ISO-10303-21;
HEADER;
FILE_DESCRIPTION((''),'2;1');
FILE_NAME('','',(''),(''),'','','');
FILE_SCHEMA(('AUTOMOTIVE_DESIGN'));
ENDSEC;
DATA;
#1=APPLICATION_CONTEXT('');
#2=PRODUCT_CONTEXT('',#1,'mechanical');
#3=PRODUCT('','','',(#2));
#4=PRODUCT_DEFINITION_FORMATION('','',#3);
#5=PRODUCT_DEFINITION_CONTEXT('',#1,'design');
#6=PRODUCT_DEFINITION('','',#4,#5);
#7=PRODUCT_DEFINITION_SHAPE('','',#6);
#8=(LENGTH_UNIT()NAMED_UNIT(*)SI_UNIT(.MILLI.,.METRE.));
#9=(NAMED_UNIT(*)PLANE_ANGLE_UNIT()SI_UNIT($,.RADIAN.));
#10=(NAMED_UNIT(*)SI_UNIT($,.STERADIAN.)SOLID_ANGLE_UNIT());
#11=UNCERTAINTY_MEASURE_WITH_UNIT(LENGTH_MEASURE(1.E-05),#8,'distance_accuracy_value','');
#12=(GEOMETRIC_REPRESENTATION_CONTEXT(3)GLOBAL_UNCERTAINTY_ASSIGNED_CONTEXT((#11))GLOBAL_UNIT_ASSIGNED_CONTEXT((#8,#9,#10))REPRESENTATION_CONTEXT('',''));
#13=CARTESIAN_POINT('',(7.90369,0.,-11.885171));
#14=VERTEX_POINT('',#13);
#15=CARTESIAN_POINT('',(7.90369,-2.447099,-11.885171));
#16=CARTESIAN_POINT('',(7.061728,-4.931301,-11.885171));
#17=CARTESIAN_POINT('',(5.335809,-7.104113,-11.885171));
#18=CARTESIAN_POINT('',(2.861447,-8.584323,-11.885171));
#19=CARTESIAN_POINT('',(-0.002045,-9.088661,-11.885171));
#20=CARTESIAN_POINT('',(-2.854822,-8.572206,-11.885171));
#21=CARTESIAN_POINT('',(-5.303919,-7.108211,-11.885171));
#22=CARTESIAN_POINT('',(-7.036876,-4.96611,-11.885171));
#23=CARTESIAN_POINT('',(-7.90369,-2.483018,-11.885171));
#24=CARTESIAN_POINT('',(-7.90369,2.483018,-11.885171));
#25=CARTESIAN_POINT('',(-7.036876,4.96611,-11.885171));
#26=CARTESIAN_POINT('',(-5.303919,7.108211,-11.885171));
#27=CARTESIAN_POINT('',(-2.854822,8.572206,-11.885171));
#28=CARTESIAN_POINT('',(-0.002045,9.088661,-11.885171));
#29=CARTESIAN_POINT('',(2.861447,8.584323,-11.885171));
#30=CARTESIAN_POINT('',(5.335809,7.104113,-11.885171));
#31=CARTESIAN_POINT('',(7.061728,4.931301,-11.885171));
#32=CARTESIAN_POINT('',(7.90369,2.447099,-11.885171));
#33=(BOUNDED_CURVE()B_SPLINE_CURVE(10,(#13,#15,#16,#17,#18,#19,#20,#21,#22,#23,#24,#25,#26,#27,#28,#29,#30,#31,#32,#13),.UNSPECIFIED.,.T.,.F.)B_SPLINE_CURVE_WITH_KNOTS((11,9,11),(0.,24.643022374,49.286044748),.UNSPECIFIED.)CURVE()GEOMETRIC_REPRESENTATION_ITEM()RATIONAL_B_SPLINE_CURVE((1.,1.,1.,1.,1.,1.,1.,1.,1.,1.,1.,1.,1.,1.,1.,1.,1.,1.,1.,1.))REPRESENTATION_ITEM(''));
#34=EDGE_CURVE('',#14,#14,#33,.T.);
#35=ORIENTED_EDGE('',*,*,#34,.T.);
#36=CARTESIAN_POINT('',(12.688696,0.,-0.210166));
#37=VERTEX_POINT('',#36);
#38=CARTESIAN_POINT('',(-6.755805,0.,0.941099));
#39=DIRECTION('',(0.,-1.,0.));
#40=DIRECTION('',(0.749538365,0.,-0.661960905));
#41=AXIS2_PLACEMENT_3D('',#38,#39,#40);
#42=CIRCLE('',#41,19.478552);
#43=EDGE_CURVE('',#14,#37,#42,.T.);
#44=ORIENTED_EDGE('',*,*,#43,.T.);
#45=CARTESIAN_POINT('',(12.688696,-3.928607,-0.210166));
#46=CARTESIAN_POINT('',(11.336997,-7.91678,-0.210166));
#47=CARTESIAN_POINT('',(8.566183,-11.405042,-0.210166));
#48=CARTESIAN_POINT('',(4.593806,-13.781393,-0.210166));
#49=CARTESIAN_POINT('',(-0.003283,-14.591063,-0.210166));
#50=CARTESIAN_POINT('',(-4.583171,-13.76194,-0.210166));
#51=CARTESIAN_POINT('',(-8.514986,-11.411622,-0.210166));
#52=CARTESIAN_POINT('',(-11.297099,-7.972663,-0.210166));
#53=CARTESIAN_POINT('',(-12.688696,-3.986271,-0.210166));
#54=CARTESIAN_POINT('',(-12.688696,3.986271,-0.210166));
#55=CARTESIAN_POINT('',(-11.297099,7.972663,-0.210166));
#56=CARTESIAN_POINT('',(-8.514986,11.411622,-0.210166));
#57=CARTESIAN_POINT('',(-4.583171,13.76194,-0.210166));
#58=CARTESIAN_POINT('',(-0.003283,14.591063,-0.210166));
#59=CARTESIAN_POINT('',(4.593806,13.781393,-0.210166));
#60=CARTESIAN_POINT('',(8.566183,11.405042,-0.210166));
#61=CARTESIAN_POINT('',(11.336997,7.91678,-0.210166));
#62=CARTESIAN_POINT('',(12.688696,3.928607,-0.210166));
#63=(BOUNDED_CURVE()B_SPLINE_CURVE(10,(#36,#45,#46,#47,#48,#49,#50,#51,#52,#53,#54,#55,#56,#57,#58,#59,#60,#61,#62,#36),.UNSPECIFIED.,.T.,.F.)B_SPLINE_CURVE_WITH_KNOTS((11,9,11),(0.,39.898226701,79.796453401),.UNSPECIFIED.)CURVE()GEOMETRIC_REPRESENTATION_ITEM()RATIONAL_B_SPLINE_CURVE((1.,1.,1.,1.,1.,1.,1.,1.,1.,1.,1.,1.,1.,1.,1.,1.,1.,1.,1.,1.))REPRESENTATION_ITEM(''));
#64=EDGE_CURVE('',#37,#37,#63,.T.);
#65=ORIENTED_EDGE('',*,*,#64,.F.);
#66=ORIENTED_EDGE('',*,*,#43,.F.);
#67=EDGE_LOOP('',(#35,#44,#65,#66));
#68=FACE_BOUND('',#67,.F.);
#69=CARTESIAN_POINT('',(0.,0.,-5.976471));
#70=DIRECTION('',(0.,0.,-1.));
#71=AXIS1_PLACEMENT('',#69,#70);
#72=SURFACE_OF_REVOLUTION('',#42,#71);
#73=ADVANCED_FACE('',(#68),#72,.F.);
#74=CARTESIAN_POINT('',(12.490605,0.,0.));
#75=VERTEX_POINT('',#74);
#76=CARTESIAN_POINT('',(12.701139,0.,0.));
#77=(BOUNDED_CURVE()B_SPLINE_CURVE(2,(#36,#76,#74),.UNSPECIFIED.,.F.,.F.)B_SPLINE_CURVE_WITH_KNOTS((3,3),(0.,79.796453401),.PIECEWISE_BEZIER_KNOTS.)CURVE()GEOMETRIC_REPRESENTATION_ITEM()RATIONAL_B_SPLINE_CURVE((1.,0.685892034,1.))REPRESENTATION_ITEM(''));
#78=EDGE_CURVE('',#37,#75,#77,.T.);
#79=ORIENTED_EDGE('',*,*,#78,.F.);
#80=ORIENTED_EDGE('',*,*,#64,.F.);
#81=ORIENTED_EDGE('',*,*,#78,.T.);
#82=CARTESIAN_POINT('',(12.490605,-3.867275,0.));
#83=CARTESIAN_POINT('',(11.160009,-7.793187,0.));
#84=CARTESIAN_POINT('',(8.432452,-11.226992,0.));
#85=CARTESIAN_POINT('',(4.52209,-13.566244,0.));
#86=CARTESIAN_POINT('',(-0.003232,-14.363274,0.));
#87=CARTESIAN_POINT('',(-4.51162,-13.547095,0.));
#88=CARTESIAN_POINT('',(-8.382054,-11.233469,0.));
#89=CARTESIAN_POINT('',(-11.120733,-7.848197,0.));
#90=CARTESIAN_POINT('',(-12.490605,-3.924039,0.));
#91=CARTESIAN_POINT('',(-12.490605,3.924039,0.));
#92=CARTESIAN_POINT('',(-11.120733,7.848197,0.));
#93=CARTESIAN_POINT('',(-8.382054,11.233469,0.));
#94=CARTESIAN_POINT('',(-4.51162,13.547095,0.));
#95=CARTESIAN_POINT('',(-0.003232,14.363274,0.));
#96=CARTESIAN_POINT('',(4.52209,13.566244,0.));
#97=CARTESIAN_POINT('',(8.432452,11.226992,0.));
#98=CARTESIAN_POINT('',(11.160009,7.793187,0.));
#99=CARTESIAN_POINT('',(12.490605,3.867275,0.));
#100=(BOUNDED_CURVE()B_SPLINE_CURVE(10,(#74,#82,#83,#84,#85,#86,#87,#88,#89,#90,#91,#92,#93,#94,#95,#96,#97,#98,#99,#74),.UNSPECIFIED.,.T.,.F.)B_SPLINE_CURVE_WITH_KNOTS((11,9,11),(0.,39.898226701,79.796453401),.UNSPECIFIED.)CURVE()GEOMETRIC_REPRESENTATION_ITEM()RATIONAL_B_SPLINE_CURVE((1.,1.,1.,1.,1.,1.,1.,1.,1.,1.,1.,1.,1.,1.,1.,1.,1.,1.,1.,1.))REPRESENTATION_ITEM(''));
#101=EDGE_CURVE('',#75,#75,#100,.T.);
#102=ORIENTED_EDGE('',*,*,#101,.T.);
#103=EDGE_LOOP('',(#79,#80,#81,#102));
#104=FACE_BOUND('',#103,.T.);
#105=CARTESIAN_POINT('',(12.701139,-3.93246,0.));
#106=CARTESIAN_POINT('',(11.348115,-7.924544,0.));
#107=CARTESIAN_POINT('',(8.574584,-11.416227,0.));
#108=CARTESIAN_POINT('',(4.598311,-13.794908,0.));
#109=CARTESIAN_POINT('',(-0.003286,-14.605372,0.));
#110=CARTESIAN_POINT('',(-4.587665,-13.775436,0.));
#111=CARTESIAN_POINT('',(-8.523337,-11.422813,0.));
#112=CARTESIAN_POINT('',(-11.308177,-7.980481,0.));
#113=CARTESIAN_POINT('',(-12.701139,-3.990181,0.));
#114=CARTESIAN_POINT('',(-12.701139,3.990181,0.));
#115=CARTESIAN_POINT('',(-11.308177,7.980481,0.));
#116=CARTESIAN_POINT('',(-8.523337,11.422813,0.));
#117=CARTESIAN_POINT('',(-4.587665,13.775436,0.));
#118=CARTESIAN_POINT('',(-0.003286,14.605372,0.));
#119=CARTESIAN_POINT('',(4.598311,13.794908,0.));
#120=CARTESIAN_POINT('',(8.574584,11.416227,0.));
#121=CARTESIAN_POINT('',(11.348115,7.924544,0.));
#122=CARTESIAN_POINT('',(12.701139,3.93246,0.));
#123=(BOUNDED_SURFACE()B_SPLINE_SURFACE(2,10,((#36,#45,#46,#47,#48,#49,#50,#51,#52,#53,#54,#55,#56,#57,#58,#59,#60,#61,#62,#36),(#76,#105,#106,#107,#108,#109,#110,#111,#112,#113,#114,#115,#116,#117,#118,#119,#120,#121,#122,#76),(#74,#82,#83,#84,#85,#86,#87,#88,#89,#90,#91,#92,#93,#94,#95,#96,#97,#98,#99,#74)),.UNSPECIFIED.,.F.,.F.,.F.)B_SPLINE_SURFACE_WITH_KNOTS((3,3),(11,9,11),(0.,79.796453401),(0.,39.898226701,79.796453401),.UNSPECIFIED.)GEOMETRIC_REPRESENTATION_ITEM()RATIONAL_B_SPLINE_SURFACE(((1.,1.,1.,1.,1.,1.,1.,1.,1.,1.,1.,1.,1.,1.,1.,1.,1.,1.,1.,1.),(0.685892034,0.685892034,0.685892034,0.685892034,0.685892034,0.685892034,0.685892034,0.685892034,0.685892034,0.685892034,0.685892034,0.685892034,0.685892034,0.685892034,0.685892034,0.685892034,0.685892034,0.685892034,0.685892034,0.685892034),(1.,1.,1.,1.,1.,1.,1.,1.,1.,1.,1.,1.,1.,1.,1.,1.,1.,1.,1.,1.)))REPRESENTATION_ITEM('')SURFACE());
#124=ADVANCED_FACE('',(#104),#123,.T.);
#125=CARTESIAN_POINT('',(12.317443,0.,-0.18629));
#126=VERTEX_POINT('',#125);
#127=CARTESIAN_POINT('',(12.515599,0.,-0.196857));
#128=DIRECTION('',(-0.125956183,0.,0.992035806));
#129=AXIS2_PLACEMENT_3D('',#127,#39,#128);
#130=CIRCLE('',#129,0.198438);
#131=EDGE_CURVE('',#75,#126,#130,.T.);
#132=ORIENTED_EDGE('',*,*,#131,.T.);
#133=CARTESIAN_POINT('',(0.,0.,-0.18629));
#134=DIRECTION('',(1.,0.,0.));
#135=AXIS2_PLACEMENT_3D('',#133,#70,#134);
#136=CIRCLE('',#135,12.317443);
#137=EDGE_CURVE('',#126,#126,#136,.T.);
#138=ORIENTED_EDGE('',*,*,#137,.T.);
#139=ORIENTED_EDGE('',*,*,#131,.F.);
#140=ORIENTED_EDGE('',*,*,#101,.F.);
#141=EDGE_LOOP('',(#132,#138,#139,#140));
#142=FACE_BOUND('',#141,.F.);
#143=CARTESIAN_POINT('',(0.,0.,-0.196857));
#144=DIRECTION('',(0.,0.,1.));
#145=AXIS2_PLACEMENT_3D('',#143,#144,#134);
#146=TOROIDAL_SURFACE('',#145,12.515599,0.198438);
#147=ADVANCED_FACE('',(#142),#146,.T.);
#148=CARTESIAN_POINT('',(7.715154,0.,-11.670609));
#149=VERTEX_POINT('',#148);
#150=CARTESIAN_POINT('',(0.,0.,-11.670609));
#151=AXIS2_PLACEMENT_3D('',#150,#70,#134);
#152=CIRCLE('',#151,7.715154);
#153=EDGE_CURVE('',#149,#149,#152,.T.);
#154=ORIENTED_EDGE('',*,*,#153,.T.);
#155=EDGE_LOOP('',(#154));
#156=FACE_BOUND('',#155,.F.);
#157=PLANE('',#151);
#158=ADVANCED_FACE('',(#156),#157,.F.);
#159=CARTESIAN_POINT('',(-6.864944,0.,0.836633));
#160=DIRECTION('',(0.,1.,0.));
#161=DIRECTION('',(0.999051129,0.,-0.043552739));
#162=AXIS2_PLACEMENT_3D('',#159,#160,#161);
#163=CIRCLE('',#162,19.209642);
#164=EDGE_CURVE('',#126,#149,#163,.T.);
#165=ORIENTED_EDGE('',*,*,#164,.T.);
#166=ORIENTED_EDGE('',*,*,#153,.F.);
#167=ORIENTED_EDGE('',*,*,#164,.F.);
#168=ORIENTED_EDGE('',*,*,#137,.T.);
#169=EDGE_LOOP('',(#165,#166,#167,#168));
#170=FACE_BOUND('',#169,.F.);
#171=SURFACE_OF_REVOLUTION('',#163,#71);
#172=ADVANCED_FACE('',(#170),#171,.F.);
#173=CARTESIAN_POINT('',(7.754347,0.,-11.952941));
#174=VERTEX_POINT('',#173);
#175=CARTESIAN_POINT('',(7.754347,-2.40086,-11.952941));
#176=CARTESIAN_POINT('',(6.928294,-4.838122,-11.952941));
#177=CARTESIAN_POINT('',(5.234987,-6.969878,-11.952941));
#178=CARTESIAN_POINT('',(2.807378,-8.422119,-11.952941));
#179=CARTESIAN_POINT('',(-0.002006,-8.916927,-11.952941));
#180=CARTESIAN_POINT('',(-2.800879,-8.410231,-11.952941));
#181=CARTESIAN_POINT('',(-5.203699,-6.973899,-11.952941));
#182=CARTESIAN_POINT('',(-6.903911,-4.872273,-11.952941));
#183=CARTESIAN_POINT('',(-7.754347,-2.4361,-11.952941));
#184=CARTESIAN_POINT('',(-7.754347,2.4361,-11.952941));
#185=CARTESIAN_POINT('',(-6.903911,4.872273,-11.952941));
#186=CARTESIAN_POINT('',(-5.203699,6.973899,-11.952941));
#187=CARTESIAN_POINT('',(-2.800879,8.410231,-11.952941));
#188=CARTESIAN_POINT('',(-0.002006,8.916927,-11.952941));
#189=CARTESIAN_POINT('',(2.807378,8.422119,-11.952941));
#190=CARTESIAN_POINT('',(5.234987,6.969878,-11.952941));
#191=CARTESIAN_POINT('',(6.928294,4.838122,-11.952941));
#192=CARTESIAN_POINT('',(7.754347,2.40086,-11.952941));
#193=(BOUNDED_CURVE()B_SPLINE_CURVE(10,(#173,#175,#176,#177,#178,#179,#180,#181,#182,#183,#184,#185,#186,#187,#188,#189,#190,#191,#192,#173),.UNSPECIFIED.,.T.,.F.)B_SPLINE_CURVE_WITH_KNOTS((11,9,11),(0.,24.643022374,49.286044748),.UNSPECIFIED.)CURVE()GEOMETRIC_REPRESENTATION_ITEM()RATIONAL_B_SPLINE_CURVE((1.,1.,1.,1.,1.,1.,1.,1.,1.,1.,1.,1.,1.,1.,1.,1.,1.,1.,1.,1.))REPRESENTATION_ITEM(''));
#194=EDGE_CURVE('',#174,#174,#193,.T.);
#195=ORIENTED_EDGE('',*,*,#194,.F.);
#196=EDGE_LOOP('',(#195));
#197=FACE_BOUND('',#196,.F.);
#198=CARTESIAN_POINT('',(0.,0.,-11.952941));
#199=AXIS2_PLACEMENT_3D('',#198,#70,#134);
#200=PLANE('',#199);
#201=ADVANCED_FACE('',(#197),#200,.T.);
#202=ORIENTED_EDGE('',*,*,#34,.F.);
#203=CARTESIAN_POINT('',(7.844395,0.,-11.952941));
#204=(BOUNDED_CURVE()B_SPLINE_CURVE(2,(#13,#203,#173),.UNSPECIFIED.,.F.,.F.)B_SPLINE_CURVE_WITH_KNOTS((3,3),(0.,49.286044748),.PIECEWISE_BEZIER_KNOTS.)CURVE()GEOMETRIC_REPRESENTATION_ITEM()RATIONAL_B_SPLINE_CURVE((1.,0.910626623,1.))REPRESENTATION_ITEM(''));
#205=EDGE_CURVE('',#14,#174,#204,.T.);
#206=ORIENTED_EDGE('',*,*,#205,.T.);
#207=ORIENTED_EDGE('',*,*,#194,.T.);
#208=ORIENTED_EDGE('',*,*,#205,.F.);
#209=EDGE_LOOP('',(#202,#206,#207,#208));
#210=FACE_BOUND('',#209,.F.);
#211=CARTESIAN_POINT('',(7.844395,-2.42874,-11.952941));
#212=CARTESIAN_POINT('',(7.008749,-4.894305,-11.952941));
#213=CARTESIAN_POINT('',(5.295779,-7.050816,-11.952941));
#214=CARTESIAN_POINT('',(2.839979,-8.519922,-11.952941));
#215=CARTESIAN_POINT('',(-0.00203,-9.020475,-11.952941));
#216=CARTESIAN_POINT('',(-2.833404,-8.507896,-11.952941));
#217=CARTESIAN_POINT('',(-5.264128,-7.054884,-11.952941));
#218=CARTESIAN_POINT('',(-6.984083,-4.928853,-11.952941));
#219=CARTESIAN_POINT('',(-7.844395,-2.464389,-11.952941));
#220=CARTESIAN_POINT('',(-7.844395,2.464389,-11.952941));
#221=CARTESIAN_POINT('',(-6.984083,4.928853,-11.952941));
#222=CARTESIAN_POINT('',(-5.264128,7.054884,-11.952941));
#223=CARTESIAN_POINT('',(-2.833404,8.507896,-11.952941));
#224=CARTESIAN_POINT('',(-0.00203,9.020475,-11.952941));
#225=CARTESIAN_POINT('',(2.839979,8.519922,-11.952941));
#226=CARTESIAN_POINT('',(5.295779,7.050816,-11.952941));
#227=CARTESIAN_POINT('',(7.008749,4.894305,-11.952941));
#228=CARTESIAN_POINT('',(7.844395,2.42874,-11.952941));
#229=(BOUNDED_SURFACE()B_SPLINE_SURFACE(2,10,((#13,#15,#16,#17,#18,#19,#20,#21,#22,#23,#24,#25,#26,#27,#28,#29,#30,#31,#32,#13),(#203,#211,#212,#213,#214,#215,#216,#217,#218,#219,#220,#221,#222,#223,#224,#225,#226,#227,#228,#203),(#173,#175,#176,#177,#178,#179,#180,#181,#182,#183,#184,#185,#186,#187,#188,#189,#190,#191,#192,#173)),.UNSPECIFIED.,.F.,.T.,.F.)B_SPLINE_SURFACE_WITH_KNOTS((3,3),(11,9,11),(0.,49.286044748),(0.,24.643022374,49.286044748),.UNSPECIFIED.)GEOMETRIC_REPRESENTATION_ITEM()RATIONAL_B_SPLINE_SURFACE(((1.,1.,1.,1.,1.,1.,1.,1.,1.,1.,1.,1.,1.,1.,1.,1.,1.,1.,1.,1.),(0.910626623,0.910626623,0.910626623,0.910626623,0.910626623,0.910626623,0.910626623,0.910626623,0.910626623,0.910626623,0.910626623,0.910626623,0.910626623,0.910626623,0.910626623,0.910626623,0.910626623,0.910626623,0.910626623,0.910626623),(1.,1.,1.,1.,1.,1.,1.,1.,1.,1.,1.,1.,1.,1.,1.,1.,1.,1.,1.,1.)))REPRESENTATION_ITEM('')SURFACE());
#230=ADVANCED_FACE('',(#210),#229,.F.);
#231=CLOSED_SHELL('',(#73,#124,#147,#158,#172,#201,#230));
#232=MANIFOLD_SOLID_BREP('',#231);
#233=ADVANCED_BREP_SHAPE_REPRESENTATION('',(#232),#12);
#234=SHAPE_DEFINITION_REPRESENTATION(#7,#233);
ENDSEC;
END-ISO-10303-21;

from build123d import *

# Parameters (mm, degrees)
F2_R = 0.1984375
F4_R = 0.1984375


# Not quite as in the source:
# - a fillet or chamfer that OpenCascade refuses, or shapes differently, is made with other operations: its cross-section is extruded or revolved along the edge and cut away or added


with BuildPart() as f1:
    # F0 (on Front) → F1 (revolve)
    with BuildSketch(Plane.XZ):
        with BuildLine():
            Line((7.7151542774, -11.6706086199), (0, -11.6706086199))
            Line((0, -11.6706086199), (0, -11.9529411765))
            Line((0, -11.9529411765), (7.8441176471, -11.9529411765))
            ThreePointArc((7.8441176471, -11.9529411765), (11.2904230804, -6.3901810676), (12.7, 0))
            Line((12.7, 0), (12.3264705882, 0))
            ThreePointArc((12.3264705882, 0), (11.0006527428, -6.2224609485), (7.7151542774, -11.6706086199))
        make_face()
    revolve(axis=Axis((0, 0, -5.9764705882), (0, 0, -1)))

    # F2
    f2_edges = [f1.edges().sort_by_distance(p)[0] for p in [
        (-12.7, 0, 0),
    ]]
    fillet(f2_edges, radius=F2_R)

    # F3: fillet of radius 0.1984375 on 1 edges, made by hand

    # F3_s1 → F3_t2 (revolve, cut)
    with BuildSketch(Plane.XZ):
        with BuildLine():
            ThreePointArc((12.490604679, 0), (12.3702545725, -0.0617556355), (12.3174431547, -0.1862902123))
            ThreePointArc((12.3174431547, -0.1862902123), (12.3221829622, -0.0931560623), (12.3264705882, 0))
            Line((12.3264705882, 0), (12.490604679, 0))
        make_face()
    revolve(axis=Axis((0, 0, 0), (0, 0, -1)), mode=Mode.SUBTRACT)

    # F4
    f4_edges = [f1.edges().sort_by_distance(p)[0] for p in [
        (-7.844118, 0, -11.952941),
    ]]
    fillet(f4_edges, radius=F4_R)


solid = f1.part
